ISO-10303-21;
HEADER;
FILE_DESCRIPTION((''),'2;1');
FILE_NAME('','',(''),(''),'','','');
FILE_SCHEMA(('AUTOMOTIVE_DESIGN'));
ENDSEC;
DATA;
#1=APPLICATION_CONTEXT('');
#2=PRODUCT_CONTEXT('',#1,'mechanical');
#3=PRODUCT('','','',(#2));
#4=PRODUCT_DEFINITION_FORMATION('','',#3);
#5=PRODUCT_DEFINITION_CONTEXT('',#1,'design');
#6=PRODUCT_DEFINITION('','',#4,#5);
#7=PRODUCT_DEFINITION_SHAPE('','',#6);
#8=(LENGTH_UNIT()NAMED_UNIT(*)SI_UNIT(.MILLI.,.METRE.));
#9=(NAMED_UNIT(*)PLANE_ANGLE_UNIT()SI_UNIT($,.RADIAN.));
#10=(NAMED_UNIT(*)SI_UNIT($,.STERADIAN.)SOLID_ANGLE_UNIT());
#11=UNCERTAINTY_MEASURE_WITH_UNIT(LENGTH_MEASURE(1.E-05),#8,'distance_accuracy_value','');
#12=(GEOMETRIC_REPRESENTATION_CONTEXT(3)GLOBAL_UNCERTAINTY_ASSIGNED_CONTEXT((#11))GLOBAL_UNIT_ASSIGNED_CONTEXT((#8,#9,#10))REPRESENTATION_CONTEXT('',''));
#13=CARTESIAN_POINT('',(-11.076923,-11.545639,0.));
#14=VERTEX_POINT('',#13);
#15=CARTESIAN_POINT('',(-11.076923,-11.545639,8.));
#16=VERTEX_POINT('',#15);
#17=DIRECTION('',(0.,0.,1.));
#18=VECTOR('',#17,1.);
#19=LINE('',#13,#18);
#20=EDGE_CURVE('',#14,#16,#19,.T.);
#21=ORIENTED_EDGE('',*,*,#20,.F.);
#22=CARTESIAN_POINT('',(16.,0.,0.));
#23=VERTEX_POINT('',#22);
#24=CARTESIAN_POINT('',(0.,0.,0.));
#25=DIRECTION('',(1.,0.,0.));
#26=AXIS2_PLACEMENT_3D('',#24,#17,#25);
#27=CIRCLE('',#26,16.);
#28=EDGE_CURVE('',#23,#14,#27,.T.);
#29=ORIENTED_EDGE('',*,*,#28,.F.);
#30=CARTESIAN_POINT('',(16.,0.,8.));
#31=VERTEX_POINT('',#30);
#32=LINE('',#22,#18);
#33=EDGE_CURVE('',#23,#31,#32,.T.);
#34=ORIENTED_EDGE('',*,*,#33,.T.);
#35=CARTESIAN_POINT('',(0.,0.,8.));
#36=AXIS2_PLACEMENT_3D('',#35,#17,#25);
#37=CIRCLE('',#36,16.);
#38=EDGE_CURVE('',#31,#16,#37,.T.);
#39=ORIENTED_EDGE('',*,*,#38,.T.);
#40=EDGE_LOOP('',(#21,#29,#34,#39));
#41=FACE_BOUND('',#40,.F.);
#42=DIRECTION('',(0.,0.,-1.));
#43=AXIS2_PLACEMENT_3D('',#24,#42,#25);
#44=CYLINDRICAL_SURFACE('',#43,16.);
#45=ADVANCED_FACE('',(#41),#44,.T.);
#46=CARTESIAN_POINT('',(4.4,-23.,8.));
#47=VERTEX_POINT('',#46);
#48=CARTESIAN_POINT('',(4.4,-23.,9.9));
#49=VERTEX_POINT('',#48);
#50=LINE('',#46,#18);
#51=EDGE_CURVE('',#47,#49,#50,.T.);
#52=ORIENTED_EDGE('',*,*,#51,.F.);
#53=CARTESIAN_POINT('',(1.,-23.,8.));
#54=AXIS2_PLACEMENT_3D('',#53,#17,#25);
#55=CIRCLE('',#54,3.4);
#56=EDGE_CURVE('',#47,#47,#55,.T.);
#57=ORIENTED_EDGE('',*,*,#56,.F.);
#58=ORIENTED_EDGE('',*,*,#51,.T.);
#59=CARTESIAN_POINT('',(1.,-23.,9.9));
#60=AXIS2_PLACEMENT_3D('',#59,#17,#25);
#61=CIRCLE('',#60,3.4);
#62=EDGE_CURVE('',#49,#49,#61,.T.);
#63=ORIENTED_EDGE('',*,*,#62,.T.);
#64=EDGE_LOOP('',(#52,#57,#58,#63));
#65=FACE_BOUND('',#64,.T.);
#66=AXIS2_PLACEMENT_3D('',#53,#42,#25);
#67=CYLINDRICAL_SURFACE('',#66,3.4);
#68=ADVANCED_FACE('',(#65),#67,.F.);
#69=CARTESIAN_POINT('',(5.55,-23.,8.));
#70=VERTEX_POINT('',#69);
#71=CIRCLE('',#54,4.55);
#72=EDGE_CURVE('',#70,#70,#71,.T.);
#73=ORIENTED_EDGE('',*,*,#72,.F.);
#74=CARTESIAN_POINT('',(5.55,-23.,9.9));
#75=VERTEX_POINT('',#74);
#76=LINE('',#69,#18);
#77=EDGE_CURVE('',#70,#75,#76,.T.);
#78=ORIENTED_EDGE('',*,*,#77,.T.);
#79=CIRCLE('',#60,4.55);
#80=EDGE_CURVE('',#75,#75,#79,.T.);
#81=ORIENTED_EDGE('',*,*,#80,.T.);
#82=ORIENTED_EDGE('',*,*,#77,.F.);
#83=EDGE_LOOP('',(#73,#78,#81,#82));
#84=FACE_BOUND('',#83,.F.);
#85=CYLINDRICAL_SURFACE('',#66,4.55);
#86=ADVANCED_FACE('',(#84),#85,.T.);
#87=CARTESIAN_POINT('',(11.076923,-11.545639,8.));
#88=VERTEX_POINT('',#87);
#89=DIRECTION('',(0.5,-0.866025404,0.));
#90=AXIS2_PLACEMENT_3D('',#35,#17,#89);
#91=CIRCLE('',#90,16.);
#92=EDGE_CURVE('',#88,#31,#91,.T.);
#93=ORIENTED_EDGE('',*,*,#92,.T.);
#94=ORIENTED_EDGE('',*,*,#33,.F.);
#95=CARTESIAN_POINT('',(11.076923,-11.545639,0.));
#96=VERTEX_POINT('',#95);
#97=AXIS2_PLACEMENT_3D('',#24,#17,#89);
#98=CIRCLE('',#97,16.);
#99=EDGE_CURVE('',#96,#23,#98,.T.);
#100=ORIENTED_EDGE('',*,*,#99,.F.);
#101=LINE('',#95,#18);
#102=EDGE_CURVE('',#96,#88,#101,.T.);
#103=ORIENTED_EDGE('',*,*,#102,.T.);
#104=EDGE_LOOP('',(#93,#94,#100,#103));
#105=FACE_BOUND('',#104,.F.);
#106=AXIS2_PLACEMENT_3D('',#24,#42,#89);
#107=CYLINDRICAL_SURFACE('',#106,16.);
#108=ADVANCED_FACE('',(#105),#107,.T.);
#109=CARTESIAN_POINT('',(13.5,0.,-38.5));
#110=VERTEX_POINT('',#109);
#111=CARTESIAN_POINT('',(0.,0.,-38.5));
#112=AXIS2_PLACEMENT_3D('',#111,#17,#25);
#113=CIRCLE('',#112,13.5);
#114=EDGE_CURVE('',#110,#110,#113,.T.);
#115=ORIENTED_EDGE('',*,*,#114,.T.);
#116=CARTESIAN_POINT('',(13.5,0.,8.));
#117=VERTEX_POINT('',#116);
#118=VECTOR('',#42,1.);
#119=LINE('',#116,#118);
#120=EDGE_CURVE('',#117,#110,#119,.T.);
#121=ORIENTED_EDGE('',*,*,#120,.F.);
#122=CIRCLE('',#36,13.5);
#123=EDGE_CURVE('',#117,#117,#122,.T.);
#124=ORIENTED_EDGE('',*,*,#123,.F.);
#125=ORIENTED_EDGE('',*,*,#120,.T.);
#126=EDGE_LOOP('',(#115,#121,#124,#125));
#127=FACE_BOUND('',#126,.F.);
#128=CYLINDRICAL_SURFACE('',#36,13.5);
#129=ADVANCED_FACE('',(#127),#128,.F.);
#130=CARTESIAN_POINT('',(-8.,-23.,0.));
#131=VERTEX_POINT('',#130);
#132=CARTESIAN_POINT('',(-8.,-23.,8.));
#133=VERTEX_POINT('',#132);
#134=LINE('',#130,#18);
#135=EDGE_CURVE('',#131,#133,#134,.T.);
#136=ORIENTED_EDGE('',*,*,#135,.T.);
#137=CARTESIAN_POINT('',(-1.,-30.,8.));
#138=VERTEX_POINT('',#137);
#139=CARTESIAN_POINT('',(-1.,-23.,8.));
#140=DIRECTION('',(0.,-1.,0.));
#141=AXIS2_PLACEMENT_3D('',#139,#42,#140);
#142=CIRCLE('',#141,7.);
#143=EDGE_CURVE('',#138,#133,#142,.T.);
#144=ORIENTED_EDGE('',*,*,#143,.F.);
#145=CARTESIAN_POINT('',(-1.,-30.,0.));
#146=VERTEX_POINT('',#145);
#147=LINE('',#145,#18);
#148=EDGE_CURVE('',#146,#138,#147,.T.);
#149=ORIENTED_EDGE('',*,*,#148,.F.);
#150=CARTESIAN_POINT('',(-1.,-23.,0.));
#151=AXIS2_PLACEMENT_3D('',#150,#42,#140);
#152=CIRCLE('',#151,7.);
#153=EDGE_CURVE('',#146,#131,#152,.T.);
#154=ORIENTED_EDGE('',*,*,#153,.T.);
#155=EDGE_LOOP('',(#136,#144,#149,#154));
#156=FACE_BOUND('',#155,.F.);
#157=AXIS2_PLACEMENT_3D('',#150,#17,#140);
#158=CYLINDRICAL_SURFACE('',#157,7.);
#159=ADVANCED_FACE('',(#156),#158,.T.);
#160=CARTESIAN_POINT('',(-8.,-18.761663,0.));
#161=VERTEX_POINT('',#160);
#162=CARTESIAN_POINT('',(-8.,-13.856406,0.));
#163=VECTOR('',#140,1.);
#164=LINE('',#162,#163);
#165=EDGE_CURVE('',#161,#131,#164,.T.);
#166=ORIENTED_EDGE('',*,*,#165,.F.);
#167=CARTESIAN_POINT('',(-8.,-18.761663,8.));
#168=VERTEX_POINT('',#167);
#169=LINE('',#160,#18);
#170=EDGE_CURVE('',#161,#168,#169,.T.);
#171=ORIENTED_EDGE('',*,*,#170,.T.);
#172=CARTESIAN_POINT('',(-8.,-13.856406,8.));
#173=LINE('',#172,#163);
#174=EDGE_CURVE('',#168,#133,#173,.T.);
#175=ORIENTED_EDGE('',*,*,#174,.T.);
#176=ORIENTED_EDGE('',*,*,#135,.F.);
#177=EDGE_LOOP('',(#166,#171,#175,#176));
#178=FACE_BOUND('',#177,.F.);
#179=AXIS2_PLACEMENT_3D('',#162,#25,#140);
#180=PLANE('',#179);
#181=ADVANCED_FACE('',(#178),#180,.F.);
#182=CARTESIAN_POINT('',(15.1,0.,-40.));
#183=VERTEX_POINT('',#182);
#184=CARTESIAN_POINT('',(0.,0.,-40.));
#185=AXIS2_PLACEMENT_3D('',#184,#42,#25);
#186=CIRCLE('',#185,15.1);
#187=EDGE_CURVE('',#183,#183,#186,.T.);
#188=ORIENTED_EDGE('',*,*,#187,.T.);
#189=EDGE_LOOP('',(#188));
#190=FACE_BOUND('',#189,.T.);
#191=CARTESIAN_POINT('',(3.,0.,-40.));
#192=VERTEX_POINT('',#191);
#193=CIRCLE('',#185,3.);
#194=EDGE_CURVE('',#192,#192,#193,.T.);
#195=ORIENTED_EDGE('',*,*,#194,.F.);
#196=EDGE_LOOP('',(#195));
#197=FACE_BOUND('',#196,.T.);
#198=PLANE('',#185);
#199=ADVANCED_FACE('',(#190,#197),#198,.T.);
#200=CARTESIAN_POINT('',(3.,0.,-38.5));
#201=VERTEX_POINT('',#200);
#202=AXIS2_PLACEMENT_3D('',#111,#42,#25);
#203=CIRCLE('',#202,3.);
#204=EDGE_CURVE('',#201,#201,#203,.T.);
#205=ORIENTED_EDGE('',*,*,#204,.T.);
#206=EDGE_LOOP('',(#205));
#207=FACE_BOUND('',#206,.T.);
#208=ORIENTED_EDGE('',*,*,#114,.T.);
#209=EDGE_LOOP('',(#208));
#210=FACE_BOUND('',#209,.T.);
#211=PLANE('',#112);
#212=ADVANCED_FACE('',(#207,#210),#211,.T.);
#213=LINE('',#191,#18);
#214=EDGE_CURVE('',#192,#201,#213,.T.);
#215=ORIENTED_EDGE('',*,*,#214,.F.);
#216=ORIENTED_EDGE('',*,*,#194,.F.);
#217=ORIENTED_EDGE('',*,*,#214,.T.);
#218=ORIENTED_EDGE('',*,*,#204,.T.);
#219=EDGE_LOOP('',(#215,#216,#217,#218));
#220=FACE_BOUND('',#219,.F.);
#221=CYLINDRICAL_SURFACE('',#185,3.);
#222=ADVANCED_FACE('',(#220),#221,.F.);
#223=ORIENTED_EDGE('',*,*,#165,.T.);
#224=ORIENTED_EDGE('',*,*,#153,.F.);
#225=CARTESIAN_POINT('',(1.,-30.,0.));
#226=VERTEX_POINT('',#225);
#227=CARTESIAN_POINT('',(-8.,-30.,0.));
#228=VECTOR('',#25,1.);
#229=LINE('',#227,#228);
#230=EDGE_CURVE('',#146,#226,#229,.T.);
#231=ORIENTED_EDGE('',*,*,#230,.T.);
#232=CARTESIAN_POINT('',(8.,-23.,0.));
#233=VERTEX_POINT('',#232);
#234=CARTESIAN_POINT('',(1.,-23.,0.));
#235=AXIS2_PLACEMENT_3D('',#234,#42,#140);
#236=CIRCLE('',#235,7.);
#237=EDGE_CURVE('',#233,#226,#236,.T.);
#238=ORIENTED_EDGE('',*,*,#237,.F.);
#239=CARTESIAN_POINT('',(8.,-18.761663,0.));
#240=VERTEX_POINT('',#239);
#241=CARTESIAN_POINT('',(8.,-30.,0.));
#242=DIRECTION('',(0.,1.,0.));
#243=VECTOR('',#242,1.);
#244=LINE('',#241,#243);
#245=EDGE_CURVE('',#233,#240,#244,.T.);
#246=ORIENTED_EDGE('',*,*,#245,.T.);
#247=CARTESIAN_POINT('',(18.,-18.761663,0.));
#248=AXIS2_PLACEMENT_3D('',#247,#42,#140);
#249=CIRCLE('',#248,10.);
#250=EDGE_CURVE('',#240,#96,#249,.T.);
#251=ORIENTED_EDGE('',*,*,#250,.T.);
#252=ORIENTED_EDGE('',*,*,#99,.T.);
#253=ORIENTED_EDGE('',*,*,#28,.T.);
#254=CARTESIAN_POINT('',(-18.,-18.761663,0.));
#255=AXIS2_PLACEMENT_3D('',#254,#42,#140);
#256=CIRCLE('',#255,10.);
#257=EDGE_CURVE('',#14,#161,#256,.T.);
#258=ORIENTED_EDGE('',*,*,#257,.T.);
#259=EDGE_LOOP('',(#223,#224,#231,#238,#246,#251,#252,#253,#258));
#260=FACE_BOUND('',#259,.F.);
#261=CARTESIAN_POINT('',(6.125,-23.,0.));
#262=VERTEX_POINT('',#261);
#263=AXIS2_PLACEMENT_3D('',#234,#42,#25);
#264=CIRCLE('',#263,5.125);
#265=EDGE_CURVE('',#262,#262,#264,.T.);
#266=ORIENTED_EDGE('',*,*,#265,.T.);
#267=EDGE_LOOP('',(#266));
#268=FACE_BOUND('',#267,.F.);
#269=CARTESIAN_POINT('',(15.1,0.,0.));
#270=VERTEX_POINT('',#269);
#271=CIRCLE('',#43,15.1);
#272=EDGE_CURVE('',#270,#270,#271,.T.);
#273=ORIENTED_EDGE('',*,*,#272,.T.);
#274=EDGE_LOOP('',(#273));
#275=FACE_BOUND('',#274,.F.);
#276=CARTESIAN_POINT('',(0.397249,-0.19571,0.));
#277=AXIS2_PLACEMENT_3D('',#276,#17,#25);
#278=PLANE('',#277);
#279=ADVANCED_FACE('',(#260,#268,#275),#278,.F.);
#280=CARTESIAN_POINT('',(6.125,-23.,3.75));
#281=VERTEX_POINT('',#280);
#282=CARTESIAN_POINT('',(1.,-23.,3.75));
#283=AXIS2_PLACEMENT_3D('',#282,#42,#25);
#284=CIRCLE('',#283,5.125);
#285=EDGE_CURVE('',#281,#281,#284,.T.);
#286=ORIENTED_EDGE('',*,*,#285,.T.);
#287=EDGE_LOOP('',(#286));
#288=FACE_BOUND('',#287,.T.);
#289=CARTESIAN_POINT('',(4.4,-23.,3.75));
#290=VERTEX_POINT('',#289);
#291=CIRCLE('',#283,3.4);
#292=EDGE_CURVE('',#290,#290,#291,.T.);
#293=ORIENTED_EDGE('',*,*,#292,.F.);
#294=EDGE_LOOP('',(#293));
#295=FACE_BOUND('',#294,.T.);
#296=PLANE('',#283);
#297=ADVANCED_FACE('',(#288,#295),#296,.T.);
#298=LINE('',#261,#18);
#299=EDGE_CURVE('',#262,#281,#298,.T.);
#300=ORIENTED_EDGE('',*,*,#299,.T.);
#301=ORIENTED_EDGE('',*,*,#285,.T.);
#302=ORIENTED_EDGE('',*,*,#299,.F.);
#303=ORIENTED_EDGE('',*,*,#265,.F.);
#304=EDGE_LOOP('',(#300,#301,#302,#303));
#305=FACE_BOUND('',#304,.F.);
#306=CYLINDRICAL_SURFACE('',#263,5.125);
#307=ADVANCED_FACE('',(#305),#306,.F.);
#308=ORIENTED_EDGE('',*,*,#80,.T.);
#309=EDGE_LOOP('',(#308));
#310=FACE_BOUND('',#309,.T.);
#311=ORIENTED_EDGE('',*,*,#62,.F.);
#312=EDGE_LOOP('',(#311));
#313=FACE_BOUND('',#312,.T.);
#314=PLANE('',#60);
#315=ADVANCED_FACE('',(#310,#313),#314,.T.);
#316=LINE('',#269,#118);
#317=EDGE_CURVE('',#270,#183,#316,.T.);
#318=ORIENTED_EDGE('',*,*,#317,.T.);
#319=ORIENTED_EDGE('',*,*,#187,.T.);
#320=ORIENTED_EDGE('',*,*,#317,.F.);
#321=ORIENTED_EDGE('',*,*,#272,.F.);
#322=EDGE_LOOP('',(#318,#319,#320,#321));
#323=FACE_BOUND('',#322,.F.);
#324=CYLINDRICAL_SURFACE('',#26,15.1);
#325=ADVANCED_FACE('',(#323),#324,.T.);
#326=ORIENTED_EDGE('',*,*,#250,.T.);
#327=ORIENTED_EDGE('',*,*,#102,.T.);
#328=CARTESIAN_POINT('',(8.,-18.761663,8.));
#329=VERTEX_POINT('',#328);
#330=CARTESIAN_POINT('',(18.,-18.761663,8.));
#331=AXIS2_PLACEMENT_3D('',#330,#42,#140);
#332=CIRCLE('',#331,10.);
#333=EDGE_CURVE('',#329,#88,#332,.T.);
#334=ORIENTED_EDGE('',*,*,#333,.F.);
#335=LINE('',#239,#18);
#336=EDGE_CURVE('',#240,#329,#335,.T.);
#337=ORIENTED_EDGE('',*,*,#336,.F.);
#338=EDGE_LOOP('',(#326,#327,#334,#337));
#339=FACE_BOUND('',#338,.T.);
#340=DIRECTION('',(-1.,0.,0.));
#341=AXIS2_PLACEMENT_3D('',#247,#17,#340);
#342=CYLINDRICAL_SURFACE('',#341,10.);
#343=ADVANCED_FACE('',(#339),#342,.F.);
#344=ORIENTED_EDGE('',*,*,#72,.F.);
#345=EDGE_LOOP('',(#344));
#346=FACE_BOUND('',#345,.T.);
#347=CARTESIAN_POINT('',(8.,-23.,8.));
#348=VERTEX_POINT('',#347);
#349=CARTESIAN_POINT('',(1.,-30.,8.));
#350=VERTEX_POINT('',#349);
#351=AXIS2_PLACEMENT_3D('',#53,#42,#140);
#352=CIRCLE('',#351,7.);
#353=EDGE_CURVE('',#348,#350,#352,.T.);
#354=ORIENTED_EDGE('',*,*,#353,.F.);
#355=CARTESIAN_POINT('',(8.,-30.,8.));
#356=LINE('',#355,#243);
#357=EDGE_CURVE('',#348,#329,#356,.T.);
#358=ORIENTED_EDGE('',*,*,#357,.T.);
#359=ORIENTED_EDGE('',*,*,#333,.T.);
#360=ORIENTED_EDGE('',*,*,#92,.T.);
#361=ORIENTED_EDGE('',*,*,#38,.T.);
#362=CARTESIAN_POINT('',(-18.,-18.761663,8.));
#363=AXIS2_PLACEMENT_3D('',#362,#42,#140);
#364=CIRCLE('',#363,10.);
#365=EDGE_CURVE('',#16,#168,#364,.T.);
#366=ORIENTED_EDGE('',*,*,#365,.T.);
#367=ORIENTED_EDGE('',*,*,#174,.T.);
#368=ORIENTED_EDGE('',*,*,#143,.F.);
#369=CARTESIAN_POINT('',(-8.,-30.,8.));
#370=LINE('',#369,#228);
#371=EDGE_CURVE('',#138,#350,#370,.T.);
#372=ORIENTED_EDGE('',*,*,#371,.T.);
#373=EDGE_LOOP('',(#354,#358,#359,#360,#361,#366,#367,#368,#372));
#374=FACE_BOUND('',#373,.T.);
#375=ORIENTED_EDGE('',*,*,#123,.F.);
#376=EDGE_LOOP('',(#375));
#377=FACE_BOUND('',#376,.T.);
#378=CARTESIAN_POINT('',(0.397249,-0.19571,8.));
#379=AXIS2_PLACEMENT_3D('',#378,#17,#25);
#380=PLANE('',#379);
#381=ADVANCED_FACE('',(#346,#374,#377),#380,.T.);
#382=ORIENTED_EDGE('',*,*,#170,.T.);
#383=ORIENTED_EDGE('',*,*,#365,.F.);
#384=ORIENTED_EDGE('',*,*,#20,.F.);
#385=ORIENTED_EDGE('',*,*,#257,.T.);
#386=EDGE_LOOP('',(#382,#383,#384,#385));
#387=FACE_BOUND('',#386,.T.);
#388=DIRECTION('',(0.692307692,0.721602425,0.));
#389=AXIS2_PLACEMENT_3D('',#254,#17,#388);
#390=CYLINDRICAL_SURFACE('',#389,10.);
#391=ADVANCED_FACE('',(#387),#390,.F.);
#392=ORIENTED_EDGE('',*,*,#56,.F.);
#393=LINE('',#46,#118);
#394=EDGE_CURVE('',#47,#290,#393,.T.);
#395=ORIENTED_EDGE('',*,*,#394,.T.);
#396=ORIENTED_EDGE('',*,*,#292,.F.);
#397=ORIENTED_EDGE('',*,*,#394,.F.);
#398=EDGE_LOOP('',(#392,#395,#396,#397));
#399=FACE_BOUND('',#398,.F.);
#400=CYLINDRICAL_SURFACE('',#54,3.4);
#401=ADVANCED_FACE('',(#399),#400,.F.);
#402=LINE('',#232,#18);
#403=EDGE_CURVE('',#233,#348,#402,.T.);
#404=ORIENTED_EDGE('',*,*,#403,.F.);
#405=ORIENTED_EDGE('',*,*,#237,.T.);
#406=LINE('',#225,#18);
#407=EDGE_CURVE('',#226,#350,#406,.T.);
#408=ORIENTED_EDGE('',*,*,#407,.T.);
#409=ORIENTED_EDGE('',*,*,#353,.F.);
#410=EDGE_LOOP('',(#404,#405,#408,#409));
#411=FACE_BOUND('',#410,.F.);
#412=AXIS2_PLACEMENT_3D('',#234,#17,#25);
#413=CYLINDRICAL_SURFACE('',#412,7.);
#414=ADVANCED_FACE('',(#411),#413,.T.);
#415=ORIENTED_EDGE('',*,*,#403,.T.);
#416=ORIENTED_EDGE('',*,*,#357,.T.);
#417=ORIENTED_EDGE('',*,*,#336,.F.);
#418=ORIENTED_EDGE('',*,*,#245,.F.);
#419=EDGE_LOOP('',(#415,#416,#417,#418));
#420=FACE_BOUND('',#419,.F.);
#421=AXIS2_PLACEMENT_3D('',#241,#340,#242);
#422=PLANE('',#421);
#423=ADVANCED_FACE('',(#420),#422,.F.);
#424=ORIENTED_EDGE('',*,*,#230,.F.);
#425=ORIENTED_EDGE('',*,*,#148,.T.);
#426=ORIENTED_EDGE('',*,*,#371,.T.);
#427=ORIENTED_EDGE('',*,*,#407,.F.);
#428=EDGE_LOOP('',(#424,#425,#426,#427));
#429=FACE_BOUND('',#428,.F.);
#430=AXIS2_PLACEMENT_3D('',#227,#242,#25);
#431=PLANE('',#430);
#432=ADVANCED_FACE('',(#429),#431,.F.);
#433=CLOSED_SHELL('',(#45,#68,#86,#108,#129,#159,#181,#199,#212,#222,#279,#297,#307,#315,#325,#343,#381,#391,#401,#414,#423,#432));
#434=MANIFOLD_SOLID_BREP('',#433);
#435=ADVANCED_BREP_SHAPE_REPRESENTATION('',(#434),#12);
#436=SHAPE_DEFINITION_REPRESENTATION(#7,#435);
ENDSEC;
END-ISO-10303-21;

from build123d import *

# Parameters (mm, degrees)
F1_DEPTH  = 8
F2_R      = 15.1
F3_DEPTH  = 40
F4_R      = 7
F5_R      = 13.5
F6_DEPTH  = 46.5
F7_R      = 4.55
F7_R_2    = 3.4
F8_DEPTH  = 1.9
F9_DEPTH  = 48.001
F10_R     = 5.125
F10_R_2   = 3.4
F11_DEPTH = 3.75
F12_R     = 3
F13_DEPTH = 49.901
F14_R     = 10


with BuildPart() as f1:
    # F0 (on Top) → F1 (new body)
    with BuildSketch(Plane.XY):
        with BuildLine():
            ThreePointArc((8, -13.8564064606), (13.8564064606, -8), (16, 0))
            ThreePointArc((16, 0), (-8, 13.8564064606), (-8, -13.8564064606))
            Line((-8, -13.8564064606), (-8, 0))
            Line((-8, 0), (8, 0))
            Line((8, 0), (8, -13.8564064606))
        make_face()
        with BuildLine():
            Line((-8, 0), (-8, -13.8564064606))
            ThreePointArc((-8, -13.8564064606), (0, -16), (8, -13.8564064606))
            Line((8, -13.8564064606), (8, 0))
            Line((8, 0), (-8, 0))
        make_face()
        with BuildLine():
            ThreePointArc((8, -13.8564064606), (0, -16), (-8, -13.8564064606))
            Line((-8, -13.8564064606), (-8, -30))
            Line((-8, -30), (8, -30))
            Line((8, -30), (8, -13.8564064606))
        make_face()
    extrude(amount=F1_DEPTH)

    # F2 (on face) → F3 (join)
    with BuildSketch(Plane(origin=(0, 0, 0), x_dir=(1, 0, 0), z_dir=(0, 0, -1))):
        Circle(F2_R)
    extrude(amount=F3_DEPTH)

    # F4
    f4_edges = [f1.edges().sort_by_distance(p)[0] for p in [
        (-8, -30, 4),
        (8, -30, 4),
    ]]
    fillet(f4_edges, radius=F4_R)

    # F5 (on face) → F6 (cut)
    with BuildSketch(Plane.XY.offset(8)):
        Circle(F5_R)
    extrude(amount=-F6_DEPTH, mode=Mode.SUBTRACT)

    # F7 (on face) → F8 (join)
    with BuildSketch(Plane.XY.offset(8)):
        with Locations((1, -23)):
            Circle(F7_R)
        with Locations((1, -23)):
            Circle(F7_R_2, mode=Mode.SUBTRACT)
    extrude(amount=F8_DEPTH)

    # F9 (cut, through all): a face of the model
    f9_faces = [f1.faces().sort_by_distance(p)[0] for p in [
        (1, -23, 8),
    ]]
    extrude(f9_faces, amount=-F9_DEPTH, mode=Mode.SUBTRACT)

    # F10 (on face) → F11 (cut)
    with BuildSketch(Plane(origin=(0, 0, 0), x_dir=(1, 0, 0), z_dir=(0, 0, -1))):
        with Locations((1, 23)):
            Circle(F10_R)
        with Locations((1, 23)):
            Circle(F10_R_2, mode=Mode.SUBTRACT)
    extrude(amount=-F11_DEPTH, mode=Mode.SUBTRACT)

    # F12 (on face) → F13 (cut, through all)
    with BuildSketch(Plane(origin=(0, 0, -40), x_dir=(1, 0, 0), z_dir=(0, 0, -1))):
        Circle(F12_R)
    extrude(amount=-F13_DEPTH, mode=Mode.SUBTRACT)

    # F14
    f14_edges = [f1.edges().sort_by_distance(p)[0] for p in [
        (-8, -13.856406, 4),
        (8, -13.856406, 4),
    ]]
    fillet(f14_edges, radius=F14_R)


solid = f1.part
